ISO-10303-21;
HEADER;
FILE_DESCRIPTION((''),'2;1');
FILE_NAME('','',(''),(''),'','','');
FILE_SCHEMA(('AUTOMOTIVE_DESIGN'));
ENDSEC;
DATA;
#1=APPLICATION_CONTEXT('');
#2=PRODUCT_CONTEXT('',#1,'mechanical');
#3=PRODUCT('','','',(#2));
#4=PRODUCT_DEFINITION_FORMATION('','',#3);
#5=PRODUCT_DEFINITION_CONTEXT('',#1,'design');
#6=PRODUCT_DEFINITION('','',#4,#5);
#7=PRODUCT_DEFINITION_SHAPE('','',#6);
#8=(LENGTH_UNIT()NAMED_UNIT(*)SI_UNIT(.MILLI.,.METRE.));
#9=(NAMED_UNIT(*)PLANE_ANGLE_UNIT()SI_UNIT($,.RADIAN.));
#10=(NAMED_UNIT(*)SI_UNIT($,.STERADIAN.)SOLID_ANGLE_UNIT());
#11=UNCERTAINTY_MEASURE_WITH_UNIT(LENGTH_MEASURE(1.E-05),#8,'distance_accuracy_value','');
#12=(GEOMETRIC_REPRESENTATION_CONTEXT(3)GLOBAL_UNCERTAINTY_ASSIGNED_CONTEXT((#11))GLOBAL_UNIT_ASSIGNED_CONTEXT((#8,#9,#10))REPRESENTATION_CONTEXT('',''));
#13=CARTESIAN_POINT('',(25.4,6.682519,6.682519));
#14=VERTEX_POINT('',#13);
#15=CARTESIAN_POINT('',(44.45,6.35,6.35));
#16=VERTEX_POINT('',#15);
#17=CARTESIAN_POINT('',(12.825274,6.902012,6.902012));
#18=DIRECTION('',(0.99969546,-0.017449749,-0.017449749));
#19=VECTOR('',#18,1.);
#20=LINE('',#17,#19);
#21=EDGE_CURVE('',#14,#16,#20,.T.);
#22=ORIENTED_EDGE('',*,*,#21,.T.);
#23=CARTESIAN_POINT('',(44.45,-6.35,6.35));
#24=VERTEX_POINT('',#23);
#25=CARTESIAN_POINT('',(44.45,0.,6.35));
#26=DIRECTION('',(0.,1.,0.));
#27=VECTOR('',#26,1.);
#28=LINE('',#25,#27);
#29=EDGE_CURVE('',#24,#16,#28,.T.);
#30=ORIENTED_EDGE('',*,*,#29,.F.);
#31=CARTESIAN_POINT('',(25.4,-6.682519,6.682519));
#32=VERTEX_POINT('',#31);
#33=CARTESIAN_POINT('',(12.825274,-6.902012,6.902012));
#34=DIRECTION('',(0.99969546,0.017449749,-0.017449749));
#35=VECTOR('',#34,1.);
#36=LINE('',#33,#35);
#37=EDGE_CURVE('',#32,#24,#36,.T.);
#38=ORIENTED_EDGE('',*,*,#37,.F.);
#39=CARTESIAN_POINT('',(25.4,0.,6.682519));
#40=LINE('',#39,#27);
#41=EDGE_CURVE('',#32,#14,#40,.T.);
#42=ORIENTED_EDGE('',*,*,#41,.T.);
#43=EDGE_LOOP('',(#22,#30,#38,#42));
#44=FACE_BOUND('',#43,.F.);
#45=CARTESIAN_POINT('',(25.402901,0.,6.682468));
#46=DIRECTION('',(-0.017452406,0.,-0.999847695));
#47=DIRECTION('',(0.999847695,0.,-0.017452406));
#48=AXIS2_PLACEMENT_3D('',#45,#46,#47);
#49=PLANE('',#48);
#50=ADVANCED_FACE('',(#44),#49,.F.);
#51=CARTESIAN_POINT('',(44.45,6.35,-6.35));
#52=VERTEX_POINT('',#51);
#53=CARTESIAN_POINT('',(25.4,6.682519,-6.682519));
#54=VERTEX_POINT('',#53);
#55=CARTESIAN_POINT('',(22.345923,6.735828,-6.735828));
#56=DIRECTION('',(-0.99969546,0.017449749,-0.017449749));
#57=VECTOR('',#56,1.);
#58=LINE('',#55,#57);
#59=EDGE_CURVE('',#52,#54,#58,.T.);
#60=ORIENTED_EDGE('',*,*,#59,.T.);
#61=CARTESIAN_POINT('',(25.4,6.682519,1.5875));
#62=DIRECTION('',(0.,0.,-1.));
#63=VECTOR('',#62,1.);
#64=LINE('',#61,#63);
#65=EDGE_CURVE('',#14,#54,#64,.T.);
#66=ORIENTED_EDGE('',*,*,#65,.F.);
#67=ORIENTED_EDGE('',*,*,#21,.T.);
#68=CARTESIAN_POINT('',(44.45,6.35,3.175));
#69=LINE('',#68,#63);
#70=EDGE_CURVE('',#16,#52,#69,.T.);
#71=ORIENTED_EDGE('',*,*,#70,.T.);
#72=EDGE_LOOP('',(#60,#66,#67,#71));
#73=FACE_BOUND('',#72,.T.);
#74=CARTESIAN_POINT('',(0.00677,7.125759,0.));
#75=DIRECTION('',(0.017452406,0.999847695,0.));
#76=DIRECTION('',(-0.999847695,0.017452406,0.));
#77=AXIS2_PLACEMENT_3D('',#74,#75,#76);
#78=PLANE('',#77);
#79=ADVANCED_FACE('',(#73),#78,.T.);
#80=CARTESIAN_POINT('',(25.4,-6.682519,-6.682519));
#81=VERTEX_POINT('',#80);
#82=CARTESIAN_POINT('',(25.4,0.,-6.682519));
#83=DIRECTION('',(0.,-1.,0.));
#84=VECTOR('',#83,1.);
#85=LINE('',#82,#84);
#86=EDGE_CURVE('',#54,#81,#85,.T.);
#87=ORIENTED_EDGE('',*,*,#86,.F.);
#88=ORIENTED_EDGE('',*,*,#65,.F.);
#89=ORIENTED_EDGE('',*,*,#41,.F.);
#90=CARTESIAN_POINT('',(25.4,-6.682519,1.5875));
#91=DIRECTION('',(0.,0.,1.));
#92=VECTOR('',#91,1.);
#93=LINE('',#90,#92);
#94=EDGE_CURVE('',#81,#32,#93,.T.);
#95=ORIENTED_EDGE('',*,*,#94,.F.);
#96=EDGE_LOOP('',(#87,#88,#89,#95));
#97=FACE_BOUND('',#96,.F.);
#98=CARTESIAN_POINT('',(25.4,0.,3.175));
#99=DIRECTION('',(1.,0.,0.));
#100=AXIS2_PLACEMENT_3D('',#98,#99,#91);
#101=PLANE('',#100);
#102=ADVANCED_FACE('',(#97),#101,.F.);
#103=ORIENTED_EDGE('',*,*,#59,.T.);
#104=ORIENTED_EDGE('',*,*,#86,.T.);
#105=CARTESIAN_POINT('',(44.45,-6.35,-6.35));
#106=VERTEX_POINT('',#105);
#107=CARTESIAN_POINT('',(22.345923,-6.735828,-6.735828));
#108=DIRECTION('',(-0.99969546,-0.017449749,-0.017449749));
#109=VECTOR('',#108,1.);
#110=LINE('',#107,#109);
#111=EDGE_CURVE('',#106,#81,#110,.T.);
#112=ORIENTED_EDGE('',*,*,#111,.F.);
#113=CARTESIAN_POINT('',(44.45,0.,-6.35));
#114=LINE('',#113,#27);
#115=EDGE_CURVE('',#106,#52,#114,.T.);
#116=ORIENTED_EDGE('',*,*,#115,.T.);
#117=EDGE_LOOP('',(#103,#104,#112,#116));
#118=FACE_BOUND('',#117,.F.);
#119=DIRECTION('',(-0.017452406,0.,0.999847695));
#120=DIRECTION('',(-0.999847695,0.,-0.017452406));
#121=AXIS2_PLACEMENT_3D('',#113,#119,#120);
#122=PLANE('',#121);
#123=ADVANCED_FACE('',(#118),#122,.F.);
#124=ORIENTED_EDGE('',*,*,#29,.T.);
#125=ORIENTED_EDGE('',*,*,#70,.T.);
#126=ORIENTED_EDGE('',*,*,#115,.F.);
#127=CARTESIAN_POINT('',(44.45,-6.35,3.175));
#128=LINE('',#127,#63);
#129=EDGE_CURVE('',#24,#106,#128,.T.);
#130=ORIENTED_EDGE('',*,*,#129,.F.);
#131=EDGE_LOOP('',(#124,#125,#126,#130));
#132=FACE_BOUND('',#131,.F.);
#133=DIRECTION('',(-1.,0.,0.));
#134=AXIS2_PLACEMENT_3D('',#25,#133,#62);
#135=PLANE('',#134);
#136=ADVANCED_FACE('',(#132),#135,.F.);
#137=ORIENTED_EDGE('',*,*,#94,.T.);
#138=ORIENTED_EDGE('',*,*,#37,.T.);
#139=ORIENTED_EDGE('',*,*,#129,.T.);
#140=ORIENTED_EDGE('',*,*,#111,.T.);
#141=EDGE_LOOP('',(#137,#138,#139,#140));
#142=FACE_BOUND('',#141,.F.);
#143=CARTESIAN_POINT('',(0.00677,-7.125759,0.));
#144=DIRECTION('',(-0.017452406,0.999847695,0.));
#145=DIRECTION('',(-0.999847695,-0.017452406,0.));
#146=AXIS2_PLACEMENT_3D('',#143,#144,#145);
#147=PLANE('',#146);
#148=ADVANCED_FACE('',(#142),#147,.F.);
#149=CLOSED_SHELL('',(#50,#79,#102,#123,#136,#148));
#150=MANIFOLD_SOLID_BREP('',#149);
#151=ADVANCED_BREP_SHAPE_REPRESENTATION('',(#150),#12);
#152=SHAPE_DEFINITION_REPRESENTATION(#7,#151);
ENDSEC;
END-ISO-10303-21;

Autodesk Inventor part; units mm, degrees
ref_plane "YZ Plane" through (0, 0, 0) normal (1, 0, 0) x (0, 1, 0)
ref_plane "XZ Plane" through (0, 0, 0) normal (0, 1, 0) x (-1, 0, 0)
ref_plane "XY Plane" through (0, 0, 0) normal (0, 0, 1) x (1, 0, 0)
sketch "Sketch2" plane through (0, 0, 0) normal (0, 1, 0) x (-1, 0, 0)
  line L0 (-25.4, 6.35) -> (-44.45, 6.35)
  line L1 (-44.45, 6.35) -> (-44.45, -6.35)
  line L2 (-44.45, -6.35) -> (-25.4, -6.35)
  line L3 (-25.4, -6.35) -> (-25.4, 6.35)
  line L4 (-25.4, 3.175) -> (-25.4, -3.175) projected
  point P0 (0, 0)
  point P1 (-25.4, 0)
  dimension "d6" = 0
extrude "Extrusion1" add sketch "Sketch2" along normal mid plane 12.7
draft "FaceDraft1" angle 1 pull direction (1, 0, 0) faces at (31.75, -6.35, -2.1167) (38.1, 2.1167, 6.35) (38.1, -2.1167, -6.35) (31.75, 6.35, -2.1167) fixed edges at (44.45, -6.35, 0) (44.45, 0, 6.35) (44.45, 0, -6.35) (44.45, 6.35, 0)
properties part number "Piston Assembly Cast Image 2"
